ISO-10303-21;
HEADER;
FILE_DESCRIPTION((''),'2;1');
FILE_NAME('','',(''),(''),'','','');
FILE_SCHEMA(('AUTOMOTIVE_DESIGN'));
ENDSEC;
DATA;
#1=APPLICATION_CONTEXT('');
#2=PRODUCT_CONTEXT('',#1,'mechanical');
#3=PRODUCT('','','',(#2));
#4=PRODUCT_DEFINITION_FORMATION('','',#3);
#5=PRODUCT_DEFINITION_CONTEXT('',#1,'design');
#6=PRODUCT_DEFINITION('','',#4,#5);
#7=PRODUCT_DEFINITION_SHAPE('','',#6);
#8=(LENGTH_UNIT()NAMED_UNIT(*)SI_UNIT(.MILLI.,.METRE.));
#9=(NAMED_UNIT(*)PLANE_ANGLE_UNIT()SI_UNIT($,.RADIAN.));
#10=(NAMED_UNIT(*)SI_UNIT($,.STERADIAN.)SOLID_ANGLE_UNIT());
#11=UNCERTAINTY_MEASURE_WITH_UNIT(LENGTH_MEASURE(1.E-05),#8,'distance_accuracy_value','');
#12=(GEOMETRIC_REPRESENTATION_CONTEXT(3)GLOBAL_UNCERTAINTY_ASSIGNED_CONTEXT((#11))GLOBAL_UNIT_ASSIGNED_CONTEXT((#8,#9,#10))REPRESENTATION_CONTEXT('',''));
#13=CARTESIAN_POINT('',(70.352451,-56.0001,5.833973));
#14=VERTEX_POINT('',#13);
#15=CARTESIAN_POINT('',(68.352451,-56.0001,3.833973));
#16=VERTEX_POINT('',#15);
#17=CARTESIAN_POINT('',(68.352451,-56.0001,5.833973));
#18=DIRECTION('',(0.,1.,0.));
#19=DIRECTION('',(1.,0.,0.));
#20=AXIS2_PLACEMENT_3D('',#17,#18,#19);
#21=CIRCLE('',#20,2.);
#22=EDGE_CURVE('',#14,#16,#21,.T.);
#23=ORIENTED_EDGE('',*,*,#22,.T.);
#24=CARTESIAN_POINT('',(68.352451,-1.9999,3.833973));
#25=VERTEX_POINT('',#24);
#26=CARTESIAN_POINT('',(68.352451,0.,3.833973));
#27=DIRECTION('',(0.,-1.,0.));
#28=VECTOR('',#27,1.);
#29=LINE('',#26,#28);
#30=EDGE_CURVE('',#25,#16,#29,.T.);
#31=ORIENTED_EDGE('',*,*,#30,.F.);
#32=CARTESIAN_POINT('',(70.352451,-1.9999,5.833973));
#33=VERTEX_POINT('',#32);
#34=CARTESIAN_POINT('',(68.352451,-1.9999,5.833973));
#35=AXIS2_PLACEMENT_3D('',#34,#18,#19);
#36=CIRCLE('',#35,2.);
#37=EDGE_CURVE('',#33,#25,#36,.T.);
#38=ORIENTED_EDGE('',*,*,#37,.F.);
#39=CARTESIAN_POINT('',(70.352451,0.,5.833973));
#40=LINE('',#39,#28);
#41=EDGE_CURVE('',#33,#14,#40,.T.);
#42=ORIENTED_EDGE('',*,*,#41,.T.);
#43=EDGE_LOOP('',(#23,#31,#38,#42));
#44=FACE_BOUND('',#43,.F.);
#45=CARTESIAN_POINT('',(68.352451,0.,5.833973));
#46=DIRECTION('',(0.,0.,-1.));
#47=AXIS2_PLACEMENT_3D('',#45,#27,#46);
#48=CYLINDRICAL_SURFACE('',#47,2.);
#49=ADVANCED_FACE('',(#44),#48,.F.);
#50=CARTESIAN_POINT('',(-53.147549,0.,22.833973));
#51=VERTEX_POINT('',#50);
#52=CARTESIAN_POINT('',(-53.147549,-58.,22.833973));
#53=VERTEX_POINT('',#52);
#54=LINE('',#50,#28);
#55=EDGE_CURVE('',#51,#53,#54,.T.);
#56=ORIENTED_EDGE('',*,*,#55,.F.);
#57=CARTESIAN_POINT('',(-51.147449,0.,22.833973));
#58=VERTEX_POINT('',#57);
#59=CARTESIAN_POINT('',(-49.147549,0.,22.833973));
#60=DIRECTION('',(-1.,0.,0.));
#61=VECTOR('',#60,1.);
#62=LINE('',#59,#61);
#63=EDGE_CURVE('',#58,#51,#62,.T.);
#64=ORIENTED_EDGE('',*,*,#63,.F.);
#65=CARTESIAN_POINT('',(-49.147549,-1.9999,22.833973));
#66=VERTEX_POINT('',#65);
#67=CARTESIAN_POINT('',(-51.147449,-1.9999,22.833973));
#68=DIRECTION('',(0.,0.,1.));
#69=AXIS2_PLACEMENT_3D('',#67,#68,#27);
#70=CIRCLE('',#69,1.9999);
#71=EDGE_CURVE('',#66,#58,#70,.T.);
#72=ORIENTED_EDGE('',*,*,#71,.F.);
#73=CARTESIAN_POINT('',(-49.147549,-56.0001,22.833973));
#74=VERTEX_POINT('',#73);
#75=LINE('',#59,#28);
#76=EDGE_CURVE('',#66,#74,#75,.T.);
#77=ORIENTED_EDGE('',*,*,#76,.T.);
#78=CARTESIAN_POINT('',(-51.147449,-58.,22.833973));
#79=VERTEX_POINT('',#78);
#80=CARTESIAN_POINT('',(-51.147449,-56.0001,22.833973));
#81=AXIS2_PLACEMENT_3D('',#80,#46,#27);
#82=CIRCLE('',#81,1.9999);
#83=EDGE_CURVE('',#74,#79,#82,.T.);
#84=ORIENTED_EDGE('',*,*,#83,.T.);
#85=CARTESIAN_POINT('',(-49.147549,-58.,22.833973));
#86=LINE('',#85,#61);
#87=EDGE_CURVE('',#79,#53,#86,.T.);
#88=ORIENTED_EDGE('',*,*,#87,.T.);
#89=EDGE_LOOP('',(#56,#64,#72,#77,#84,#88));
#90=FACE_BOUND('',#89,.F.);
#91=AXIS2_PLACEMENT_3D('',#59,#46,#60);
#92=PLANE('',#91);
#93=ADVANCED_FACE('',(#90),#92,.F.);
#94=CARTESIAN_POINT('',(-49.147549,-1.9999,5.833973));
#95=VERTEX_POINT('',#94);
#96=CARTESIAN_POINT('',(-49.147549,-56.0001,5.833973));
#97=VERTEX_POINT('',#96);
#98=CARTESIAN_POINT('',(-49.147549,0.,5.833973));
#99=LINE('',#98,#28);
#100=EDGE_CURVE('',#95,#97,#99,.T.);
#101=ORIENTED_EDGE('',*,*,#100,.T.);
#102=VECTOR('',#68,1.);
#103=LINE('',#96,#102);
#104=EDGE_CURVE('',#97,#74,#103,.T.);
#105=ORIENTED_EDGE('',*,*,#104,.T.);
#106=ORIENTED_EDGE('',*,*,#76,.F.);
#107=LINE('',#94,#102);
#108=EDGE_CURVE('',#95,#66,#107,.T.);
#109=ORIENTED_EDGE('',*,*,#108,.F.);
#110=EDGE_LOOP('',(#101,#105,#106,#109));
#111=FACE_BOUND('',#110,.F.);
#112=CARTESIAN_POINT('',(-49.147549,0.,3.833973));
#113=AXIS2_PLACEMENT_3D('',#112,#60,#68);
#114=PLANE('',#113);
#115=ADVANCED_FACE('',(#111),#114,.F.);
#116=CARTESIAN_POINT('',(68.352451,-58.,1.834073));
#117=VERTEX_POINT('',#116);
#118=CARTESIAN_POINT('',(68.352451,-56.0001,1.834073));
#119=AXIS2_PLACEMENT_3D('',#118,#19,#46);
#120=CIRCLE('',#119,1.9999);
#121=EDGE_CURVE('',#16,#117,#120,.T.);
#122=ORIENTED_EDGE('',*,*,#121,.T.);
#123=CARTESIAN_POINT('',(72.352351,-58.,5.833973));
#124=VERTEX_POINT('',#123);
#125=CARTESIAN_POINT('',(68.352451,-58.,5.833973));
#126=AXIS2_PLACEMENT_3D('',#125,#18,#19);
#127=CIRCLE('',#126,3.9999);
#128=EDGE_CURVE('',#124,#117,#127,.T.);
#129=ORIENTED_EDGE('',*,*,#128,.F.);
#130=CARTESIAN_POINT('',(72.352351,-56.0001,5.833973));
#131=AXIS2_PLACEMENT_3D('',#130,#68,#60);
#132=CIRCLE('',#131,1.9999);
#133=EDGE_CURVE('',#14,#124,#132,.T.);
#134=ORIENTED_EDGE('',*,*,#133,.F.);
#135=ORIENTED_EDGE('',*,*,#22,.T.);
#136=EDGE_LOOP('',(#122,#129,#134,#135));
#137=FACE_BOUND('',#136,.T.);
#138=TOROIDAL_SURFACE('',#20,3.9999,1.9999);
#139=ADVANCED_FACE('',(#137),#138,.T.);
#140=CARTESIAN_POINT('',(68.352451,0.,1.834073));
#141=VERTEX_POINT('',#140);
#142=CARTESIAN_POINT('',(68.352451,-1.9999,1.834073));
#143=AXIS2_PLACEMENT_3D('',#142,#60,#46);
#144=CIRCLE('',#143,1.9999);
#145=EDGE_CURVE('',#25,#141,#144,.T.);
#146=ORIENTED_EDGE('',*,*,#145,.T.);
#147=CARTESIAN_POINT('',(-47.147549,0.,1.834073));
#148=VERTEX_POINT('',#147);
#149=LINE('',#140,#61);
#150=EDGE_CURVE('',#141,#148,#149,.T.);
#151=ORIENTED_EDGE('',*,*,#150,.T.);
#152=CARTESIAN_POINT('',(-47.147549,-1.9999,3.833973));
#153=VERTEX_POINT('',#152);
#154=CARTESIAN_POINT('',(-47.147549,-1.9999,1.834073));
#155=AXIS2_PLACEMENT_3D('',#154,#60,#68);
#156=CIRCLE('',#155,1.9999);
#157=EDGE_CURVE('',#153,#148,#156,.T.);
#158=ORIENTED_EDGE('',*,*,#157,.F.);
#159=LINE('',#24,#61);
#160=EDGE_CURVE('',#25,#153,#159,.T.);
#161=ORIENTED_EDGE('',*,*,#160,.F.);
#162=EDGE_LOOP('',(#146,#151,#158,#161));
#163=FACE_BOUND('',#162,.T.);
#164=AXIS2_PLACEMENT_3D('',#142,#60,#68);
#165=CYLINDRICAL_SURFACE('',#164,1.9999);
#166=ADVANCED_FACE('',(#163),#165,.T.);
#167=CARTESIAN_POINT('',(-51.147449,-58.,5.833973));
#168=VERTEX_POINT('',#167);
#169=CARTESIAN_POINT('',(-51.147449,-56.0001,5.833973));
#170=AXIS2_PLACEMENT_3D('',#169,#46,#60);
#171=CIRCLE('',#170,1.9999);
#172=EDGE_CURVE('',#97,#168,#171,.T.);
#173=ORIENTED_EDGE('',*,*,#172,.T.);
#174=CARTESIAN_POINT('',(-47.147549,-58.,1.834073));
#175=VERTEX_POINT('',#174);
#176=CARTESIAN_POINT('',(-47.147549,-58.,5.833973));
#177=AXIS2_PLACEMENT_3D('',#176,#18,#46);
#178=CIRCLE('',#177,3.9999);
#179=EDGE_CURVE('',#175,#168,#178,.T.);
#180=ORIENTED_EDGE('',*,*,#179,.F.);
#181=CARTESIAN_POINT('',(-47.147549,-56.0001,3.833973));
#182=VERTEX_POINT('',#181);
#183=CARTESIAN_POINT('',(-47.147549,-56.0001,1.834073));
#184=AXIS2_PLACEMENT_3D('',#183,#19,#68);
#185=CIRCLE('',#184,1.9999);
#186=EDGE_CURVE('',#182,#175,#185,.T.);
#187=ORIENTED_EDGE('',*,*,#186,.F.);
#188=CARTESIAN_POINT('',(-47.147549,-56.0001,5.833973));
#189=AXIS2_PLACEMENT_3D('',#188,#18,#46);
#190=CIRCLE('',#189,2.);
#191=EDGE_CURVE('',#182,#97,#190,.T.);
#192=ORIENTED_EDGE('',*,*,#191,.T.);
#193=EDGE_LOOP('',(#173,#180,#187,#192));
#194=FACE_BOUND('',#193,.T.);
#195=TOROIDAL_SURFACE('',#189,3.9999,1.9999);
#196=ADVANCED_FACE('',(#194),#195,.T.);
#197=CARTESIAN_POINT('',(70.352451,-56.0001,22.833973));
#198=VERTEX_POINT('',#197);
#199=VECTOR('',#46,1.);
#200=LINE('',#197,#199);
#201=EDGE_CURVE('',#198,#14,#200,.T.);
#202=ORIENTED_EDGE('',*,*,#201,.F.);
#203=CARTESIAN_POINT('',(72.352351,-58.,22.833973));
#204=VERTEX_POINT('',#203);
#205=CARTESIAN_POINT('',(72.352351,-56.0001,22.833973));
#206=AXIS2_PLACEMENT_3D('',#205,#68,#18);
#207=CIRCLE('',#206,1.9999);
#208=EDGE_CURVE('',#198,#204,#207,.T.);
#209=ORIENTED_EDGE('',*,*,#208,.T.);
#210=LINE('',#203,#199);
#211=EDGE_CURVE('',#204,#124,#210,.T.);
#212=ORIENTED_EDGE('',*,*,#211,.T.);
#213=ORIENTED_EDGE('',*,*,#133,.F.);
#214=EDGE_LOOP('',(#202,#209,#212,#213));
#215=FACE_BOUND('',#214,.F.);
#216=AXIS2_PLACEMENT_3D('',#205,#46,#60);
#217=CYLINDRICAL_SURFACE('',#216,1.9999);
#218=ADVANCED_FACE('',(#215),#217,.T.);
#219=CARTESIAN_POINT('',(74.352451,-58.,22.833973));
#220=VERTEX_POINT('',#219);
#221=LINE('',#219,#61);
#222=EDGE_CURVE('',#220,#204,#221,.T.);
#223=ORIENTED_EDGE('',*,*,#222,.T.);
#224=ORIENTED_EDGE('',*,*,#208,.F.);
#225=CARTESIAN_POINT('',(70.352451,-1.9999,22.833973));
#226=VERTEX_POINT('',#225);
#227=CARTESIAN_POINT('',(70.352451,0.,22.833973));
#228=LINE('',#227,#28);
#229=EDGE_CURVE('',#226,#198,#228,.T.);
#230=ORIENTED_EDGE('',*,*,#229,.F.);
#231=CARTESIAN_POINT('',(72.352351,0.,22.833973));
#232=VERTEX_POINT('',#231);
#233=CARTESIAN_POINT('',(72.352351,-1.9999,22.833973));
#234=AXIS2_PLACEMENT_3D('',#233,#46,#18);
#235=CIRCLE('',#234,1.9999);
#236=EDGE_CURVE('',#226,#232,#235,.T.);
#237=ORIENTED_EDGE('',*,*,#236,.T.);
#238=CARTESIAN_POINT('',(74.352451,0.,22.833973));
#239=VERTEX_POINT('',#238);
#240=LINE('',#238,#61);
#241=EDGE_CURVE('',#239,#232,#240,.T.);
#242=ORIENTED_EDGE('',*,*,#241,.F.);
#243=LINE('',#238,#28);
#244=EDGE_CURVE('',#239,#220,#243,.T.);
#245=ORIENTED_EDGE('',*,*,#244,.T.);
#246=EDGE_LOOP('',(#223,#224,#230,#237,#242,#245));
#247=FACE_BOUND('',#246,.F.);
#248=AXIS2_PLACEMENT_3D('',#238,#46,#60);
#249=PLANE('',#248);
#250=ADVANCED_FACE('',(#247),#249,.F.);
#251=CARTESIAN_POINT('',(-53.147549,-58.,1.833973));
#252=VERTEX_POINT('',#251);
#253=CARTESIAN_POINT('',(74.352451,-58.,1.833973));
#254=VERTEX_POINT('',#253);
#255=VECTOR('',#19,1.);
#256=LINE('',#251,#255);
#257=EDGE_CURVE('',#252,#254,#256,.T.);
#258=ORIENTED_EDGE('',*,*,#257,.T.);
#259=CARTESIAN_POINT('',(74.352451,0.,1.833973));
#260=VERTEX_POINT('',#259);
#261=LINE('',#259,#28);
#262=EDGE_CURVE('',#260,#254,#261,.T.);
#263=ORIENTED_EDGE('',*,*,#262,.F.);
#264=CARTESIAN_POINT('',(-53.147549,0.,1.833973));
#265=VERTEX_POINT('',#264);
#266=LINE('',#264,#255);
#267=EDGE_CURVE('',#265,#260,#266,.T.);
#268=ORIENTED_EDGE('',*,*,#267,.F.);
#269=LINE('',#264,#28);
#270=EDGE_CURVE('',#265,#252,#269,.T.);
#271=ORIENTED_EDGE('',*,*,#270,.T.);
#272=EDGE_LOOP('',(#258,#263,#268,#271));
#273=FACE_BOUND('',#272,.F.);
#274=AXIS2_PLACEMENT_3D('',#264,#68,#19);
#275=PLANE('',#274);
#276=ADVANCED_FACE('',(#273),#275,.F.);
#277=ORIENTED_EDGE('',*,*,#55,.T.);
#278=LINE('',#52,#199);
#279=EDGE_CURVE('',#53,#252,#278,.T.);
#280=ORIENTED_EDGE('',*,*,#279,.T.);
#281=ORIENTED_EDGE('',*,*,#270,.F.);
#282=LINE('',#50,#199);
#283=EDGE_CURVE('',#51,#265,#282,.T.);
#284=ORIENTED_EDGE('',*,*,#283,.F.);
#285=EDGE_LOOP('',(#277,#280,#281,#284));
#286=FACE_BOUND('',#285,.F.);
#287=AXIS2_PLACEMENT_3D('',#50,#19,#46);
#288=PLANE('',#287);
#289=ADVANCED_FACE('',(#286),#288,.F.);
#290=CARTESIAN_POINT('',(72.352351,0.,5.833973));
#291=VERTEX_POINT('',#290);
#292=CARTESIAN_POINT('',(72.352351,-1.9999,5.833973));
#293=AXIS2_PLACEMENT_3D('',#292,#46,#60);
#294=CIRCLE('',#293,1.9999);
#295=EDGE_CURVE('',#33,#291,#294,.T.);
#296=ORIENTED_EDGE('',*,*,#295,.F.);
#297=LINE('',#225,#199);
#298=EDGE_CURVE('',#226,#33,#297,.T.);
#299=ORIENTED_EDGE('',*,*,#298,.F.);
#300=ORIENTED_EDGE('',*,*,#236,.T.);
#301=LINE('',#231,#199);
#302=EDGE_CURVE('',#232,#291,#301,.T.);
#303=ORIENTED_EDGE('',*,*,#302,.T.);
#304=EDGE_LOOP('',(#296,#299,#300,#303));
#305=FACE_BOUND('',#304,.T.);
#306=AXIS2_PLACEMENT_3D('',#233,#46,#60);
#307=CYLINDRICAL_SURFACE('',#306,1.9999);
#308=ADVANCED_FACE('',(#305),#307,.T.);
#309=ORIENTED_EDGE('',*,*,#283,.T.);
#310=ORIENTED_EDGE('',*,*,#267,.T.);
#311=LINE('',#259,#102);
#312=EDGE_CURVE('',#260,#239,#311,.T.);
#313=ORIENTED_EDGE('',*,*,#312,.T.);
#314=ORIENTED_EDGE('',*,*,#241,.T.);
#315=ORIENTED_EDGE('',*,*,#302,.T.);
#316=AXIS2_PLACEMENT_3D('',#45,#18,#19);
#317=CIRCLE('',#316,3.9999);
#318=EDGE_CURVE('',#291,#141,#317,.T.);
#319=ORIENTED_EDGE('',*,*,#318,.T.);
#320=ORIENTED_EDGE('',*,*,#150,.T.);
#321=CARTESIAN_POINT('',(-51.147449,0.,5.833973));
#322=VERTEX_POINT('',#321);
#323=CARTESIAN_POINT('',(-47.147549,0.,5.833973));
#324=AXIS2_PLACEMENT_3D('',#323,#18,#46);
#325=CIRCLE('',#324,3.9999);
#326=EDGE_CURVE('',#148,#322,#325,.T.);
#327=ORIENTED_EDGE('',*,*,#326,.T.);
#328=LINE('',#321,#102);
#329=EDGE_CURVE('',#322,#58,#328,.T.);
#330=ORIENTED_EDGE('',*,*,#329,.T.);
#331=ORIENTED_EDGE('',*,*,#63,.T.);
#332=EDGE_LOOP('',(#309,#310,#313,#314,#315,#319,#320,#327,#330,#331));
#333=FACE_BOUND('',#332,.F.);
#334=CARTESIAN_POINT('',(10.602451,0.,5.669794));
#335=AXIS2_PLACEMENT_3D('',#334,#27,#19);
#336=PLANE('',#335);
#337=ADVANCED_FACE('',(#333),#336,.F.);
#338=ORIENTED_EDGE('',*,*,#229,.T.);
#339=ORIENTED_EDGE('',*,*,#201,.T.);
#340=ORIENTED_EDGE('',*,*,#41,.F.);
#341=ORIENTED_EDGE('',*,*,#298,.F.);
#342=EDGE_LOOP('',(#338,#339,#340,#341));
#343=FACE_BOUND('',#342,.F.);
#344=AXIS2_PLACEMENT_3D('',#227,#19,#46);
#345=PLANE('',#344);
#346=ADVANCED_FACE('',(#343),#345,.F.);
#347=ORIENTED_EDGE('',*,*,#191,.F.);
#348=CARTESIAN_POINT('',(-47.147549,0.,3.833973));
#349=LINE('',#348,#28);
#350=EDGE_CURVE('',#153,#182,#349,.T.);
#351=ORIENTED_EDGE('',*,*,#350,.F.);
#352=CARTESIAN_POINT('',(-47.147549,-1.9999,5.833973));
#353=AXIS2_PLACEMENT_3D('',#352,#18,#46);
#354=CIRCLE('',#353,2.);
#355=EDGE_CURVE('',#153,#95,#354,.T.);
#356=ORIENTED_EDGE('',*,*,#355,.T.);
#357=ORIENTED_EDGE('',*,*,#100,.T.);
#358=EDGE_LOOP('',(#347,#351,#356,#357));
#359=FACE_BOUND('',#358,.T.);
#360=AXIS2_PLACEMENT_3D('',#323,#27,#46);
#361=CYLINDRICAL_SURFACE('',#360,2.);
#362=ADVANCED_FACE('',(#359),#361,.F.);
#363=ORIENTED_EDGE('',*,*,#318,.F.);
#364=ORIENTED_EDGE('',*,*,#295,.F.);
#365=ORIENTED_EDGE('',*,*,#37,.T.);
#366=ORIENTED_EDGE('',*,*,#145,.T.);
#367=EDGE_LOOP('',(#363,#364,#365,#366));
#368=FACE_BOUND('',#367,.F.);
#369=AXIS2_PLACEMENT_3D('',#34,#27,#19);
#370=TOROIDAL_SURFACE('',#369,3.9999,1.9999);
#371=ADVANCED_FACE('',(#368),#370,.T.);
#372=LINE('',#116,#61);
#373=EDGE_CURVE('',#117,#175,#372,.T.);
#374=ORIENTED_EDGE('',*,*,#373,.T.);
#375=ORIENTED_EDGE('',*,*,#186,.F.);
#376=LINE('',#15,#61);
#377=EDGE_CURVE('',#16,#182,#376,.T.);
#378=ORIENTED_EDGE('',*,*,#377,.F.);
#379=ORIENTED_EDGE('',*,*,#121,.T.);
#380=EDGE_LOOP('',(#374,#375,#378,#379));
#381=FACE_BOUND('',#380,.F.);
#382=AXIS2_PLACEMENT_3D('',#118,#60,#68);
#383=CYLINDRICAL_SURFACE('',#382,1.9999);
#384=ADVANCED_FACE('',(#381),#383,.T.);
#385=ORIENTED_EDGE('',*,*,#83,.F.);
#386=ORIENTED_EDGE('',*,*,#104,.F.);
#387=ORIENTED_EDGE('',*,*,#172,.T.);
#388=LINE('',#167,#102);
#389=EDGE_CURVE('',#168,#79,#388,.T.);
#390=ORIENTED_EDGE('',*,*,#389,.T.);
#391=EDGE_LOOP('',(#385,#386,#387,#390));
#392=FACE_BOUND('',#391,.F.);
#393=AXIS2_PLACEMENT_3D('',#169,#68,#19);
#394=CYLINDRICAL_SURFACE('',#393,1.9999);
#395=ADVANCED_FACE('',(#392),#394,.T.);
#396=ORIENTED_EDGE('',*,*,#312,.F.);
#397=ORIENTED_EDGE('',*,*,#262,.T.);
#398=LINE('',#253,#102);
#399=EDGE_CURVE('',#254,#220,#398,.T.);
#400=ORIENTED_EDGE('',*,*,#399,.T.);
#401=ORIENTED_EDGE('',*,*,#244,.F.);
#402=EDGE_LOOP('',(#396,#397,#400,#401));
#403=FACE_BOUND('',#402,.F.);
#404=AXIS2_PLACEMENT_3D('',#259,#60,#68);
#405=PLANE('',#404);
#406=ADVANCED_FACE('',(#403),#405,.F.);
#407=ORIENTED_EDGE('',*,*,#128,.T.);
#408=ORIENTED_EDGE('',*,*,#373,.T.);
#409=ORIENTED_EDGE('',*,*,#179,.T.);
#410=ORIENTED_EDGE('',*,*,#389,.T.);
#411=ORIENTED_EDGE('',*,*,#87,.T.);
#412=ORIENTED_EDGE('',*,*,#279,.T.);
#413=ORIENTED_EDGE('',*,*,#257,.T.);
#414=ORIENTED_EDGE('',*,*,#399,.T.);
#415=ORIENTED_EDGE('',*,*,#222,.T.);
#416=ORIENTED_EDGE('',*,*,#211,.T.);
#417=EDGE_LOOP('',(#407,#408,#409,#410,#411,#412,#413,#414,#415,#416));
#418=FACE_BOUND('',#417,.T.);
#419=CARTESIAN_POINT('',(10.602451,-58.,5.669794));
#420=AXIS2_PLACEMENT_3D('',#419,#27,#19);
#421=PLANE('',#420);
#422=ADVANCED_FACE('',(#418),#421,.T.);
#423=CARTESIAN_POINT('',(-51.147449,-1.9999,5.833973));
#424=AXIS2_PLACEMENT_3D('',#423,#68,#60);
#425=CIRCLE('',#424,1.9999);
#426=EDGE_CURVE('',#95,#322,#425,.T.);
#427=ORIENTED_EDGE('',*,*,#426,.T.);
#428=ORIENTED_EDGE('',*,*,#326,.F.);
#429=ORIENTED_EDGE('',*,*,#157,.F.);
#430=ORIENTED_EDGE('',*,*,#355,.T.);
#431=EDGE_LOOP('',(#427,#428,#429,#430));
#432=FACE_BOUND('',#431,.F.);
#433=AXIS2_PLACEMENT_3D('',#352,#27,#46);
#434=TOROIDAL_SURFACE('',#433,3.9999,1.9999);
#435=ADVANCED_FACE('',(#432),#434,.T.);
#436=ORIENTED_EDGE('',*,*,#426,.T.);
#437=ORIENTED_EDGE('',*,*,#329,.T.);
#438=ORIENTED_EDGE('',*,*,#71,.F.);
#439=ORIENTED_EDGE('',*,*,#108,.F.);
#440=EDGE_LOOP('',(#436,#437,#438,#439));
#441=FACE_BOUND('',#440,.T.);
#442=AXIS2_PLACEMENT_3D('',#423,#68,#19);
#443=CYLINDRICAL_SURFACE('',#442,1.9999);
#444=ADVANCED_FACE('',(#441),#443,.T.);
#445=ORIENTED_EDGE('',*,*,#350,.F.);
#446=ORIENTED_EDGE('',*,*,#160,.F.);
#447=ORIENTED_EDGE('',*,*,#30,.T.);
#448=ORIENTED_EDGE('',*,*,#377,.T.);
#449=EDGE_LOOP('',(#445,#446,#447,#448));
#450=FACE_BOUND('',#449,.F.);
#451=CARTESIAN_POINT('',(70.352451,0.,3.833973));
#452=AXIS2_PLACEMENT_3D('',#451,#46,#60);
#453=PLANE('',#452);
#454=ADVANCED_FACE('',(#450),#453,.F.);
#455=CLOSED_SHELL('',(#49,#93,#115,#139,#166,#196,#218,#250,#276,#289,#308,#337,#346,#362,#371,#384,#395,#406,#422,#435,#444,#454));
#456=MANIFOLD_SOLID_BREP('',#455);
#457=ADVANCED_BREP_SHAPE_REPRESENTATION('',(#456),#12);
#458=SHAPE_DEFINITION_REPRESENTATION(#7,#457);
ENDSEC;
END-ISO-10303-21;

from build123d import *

# Parameters (mm, degrees)
F1_DEPTH = 58
F2_F1_R  = 2
F2_F2_R  = 1.9999


# Not quite as in the source:
# - a fillet or chamfer is up to 0.001 mm smaller than in the source, because OpenCascade refuses the exact size


with BuildPart() as f1:
    # F0 (on Front) → F1 (new body)
    with BuildSketch(Plane.XZ):
        Polygon((70.3524513997, 3.8339729243), (-49.1475486003, 3.8339729243), (-49.1475486003, 22.8339729243), (-53.1475486003, 22.8339729243), (-53.1475486003, 1.8339729243), (74.3524513997, 1.8339729243), (74.3524513997, 22.8339729243), (70.3524513997, 22.8339729243), align=None)
    extrude(amount=F1_DEPTH)

    # F2: fillet of radius 2 on 4 edges, made by hand

    # F2_f1
    f2_f1_edges = [f1.edges().sort_by_distance(p)[0] for p in [
        (70.3524513997, -29, 3.8339729243),
        (-49.1475486003, -29, 3.8339729243),
    ]]
    fillet(f2_f1_edges, radius=F2_F1_R)

    # F2_f2 (radius 2 in the source; OpenCascade refuses exactly that, so slightly less here)
    f2_f2_edges = [f1.edges().sort_by_distance(p)[0] for p in [
        (10.6024513997, 0, 3.8339729243),
        (10.6024513997, -58, 3.8339729243),
        (69.766664962, -58, 4.4197593619),
        (-48.5617621627, -58, 4.4197593619),
        (69.766664962, 0, 4.4197593619),
        (-48.5617621627, 0, 4.4197593619),
    ]]
    fillet(f2_f2_edges, radius=F2_F2_R)


solid = f1.part
